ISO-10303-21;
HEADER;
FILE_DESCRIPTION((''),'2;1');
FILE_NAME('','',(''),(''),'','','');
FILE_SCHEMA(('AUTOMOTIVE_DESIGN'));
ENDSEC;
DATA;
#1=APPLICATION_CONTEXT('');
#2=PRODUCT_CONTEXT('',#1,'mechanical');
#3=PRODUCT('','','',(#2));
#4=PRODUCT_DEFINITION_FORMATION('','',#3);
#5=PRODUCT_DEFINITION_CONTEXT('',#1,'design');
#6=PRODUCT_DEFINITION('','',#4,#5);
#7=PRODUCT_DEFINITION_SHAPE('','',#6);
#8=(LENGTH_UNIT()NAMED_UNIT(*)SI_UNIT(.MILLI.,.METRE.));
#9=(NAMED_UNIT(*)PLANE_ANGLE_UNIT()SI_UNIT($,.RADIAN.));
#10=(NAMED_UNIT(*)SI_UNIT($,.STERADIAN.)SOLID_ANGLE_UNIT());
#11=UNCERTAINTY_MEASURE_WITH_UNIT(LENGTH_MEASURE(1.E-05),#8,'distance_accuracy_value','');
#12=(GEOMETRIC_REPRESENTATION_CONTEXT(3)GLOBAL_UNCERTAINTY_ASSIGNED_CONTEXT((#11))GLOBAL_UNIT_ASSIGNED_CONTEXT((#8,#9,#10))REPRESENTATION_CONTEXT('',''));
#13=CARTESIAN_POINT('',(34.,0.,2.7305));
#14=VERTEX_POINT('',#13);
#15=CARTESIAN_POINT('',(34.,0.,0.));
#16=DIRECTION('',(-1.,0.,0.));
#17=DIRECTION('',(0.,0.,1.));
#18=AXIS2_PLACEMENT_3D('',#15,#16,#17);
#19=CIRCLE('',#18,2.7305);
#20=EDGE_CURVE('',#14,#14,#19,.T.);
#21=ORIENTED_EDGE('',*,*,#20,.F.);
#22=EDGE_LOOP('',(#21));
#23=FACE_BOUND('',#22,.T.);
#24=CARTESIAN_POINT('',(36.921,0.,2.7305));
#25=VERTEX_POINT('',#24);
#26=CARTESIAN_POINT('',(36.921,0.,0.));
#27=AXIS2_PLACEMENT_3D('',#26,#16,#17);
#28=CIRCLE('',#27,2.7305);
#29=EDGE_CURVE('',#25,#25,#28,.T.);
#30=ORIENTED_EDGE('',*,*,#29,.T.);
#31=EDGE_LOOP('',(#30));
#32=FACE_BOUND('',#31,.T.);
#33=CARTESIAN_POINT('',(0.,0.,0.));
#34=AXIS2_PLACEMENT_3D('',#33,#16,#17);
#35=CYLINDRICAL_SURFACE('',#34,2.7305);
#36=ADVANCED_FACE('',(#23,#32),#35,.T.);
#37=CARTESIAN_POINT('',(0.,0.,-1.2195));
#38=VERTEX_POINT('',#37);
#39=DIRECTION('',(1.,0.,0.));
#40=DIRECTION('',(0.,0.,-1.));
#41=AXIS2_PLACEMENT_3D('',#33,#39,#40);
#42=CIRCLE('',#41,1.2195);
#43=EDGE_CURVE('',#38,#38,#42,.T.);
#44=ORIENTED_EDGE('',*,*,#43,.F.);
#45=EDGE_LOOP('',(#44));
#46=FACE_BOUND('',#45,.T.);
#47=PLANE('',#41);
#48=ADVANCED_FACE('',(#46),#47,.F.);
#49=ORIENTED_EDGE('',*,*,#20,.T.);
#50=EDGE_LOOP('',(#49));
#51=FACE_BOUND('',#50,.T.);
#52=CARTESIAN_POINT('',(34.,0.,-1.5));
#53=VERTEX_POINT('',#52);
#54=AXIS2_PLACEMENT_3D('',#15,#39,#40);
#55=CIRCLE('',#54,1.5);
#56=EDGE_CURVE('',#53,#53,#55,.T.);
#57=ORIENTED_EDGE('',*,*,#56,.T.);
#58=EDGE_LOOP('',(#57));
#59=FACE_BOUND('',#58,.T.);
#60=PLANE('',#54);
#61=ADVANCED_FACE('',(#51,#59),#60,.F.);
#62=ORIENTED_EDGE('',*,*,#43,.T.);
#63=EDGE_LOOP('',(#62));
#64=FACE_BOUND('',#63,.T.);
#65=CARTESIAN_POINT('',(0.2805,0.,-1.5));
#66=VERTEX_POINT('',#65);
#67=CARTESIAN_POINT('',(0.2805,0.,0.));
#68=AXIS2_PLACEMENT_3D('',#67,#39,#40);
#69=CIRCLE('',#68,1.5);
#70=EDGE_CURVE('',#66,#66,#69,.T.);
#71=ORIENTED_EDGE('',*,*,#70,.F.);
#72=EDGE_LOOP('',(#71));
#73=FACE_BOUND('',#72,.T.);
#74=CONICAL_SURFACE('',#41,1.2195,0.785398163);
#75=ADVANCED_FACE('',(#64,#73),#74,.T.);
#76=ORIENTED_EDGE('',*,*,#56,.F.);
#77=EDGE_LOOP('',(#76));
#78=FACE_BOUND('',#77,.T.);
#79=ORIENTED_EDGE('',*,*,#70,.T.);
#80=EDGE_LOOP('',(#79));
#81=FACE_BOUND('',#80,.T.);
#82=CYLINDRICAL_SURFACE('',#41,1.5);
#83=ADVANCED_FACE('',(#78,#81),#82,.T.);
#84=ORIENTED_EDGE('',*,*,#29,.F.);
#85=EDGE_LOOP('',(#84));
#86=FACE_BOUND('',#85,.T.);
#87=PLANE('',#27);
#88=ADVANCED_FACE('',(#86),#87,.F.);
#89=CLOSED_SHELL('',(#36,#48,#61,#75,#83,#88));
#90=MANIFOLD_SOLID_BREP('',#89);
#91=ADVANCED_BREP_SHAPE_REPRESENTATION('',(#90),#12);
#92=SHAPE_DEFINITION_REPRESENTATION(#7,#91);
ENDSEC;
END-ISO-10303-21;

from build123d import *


# Read off the part's stored shape, not the designer's step: M3x0.5 Machine Threads Stud1
with BuildPart() as part:
    # Sketch1 → Revolve1 (revolve)
    with BuildSketch(Plane(origin=(0, 0, 0), x_dir=(-1, 0, 0), z_dir=(0, 1, 0))):
        Polygon((0, 1.524), (0, 0), (-36.921000072, 0), (-36.921000072, 2.7305), (-34.000000072, 2.7305), (-34.000000072, 1.524), align=None)
    revolve(axis=Axis((0, 0, 0), (1, 0, 0)))

    # M3x0.5 Machine Threads Stud1 outline → M3x0.5 Machine Threads Stud1 (revolve, cut)
    with BuildSketch(Plane.YX):
        Polygon((1.524, 34.000000072), (1.5, 34.000000072), (1.5, 0.2805), (1.2195, 0), (1.524, 0), align=None)
    revolve(axis=Axis((0, 0, 0), (1, 0, 0)), mode=Mode.SUBTRACT)


solid = part.part
